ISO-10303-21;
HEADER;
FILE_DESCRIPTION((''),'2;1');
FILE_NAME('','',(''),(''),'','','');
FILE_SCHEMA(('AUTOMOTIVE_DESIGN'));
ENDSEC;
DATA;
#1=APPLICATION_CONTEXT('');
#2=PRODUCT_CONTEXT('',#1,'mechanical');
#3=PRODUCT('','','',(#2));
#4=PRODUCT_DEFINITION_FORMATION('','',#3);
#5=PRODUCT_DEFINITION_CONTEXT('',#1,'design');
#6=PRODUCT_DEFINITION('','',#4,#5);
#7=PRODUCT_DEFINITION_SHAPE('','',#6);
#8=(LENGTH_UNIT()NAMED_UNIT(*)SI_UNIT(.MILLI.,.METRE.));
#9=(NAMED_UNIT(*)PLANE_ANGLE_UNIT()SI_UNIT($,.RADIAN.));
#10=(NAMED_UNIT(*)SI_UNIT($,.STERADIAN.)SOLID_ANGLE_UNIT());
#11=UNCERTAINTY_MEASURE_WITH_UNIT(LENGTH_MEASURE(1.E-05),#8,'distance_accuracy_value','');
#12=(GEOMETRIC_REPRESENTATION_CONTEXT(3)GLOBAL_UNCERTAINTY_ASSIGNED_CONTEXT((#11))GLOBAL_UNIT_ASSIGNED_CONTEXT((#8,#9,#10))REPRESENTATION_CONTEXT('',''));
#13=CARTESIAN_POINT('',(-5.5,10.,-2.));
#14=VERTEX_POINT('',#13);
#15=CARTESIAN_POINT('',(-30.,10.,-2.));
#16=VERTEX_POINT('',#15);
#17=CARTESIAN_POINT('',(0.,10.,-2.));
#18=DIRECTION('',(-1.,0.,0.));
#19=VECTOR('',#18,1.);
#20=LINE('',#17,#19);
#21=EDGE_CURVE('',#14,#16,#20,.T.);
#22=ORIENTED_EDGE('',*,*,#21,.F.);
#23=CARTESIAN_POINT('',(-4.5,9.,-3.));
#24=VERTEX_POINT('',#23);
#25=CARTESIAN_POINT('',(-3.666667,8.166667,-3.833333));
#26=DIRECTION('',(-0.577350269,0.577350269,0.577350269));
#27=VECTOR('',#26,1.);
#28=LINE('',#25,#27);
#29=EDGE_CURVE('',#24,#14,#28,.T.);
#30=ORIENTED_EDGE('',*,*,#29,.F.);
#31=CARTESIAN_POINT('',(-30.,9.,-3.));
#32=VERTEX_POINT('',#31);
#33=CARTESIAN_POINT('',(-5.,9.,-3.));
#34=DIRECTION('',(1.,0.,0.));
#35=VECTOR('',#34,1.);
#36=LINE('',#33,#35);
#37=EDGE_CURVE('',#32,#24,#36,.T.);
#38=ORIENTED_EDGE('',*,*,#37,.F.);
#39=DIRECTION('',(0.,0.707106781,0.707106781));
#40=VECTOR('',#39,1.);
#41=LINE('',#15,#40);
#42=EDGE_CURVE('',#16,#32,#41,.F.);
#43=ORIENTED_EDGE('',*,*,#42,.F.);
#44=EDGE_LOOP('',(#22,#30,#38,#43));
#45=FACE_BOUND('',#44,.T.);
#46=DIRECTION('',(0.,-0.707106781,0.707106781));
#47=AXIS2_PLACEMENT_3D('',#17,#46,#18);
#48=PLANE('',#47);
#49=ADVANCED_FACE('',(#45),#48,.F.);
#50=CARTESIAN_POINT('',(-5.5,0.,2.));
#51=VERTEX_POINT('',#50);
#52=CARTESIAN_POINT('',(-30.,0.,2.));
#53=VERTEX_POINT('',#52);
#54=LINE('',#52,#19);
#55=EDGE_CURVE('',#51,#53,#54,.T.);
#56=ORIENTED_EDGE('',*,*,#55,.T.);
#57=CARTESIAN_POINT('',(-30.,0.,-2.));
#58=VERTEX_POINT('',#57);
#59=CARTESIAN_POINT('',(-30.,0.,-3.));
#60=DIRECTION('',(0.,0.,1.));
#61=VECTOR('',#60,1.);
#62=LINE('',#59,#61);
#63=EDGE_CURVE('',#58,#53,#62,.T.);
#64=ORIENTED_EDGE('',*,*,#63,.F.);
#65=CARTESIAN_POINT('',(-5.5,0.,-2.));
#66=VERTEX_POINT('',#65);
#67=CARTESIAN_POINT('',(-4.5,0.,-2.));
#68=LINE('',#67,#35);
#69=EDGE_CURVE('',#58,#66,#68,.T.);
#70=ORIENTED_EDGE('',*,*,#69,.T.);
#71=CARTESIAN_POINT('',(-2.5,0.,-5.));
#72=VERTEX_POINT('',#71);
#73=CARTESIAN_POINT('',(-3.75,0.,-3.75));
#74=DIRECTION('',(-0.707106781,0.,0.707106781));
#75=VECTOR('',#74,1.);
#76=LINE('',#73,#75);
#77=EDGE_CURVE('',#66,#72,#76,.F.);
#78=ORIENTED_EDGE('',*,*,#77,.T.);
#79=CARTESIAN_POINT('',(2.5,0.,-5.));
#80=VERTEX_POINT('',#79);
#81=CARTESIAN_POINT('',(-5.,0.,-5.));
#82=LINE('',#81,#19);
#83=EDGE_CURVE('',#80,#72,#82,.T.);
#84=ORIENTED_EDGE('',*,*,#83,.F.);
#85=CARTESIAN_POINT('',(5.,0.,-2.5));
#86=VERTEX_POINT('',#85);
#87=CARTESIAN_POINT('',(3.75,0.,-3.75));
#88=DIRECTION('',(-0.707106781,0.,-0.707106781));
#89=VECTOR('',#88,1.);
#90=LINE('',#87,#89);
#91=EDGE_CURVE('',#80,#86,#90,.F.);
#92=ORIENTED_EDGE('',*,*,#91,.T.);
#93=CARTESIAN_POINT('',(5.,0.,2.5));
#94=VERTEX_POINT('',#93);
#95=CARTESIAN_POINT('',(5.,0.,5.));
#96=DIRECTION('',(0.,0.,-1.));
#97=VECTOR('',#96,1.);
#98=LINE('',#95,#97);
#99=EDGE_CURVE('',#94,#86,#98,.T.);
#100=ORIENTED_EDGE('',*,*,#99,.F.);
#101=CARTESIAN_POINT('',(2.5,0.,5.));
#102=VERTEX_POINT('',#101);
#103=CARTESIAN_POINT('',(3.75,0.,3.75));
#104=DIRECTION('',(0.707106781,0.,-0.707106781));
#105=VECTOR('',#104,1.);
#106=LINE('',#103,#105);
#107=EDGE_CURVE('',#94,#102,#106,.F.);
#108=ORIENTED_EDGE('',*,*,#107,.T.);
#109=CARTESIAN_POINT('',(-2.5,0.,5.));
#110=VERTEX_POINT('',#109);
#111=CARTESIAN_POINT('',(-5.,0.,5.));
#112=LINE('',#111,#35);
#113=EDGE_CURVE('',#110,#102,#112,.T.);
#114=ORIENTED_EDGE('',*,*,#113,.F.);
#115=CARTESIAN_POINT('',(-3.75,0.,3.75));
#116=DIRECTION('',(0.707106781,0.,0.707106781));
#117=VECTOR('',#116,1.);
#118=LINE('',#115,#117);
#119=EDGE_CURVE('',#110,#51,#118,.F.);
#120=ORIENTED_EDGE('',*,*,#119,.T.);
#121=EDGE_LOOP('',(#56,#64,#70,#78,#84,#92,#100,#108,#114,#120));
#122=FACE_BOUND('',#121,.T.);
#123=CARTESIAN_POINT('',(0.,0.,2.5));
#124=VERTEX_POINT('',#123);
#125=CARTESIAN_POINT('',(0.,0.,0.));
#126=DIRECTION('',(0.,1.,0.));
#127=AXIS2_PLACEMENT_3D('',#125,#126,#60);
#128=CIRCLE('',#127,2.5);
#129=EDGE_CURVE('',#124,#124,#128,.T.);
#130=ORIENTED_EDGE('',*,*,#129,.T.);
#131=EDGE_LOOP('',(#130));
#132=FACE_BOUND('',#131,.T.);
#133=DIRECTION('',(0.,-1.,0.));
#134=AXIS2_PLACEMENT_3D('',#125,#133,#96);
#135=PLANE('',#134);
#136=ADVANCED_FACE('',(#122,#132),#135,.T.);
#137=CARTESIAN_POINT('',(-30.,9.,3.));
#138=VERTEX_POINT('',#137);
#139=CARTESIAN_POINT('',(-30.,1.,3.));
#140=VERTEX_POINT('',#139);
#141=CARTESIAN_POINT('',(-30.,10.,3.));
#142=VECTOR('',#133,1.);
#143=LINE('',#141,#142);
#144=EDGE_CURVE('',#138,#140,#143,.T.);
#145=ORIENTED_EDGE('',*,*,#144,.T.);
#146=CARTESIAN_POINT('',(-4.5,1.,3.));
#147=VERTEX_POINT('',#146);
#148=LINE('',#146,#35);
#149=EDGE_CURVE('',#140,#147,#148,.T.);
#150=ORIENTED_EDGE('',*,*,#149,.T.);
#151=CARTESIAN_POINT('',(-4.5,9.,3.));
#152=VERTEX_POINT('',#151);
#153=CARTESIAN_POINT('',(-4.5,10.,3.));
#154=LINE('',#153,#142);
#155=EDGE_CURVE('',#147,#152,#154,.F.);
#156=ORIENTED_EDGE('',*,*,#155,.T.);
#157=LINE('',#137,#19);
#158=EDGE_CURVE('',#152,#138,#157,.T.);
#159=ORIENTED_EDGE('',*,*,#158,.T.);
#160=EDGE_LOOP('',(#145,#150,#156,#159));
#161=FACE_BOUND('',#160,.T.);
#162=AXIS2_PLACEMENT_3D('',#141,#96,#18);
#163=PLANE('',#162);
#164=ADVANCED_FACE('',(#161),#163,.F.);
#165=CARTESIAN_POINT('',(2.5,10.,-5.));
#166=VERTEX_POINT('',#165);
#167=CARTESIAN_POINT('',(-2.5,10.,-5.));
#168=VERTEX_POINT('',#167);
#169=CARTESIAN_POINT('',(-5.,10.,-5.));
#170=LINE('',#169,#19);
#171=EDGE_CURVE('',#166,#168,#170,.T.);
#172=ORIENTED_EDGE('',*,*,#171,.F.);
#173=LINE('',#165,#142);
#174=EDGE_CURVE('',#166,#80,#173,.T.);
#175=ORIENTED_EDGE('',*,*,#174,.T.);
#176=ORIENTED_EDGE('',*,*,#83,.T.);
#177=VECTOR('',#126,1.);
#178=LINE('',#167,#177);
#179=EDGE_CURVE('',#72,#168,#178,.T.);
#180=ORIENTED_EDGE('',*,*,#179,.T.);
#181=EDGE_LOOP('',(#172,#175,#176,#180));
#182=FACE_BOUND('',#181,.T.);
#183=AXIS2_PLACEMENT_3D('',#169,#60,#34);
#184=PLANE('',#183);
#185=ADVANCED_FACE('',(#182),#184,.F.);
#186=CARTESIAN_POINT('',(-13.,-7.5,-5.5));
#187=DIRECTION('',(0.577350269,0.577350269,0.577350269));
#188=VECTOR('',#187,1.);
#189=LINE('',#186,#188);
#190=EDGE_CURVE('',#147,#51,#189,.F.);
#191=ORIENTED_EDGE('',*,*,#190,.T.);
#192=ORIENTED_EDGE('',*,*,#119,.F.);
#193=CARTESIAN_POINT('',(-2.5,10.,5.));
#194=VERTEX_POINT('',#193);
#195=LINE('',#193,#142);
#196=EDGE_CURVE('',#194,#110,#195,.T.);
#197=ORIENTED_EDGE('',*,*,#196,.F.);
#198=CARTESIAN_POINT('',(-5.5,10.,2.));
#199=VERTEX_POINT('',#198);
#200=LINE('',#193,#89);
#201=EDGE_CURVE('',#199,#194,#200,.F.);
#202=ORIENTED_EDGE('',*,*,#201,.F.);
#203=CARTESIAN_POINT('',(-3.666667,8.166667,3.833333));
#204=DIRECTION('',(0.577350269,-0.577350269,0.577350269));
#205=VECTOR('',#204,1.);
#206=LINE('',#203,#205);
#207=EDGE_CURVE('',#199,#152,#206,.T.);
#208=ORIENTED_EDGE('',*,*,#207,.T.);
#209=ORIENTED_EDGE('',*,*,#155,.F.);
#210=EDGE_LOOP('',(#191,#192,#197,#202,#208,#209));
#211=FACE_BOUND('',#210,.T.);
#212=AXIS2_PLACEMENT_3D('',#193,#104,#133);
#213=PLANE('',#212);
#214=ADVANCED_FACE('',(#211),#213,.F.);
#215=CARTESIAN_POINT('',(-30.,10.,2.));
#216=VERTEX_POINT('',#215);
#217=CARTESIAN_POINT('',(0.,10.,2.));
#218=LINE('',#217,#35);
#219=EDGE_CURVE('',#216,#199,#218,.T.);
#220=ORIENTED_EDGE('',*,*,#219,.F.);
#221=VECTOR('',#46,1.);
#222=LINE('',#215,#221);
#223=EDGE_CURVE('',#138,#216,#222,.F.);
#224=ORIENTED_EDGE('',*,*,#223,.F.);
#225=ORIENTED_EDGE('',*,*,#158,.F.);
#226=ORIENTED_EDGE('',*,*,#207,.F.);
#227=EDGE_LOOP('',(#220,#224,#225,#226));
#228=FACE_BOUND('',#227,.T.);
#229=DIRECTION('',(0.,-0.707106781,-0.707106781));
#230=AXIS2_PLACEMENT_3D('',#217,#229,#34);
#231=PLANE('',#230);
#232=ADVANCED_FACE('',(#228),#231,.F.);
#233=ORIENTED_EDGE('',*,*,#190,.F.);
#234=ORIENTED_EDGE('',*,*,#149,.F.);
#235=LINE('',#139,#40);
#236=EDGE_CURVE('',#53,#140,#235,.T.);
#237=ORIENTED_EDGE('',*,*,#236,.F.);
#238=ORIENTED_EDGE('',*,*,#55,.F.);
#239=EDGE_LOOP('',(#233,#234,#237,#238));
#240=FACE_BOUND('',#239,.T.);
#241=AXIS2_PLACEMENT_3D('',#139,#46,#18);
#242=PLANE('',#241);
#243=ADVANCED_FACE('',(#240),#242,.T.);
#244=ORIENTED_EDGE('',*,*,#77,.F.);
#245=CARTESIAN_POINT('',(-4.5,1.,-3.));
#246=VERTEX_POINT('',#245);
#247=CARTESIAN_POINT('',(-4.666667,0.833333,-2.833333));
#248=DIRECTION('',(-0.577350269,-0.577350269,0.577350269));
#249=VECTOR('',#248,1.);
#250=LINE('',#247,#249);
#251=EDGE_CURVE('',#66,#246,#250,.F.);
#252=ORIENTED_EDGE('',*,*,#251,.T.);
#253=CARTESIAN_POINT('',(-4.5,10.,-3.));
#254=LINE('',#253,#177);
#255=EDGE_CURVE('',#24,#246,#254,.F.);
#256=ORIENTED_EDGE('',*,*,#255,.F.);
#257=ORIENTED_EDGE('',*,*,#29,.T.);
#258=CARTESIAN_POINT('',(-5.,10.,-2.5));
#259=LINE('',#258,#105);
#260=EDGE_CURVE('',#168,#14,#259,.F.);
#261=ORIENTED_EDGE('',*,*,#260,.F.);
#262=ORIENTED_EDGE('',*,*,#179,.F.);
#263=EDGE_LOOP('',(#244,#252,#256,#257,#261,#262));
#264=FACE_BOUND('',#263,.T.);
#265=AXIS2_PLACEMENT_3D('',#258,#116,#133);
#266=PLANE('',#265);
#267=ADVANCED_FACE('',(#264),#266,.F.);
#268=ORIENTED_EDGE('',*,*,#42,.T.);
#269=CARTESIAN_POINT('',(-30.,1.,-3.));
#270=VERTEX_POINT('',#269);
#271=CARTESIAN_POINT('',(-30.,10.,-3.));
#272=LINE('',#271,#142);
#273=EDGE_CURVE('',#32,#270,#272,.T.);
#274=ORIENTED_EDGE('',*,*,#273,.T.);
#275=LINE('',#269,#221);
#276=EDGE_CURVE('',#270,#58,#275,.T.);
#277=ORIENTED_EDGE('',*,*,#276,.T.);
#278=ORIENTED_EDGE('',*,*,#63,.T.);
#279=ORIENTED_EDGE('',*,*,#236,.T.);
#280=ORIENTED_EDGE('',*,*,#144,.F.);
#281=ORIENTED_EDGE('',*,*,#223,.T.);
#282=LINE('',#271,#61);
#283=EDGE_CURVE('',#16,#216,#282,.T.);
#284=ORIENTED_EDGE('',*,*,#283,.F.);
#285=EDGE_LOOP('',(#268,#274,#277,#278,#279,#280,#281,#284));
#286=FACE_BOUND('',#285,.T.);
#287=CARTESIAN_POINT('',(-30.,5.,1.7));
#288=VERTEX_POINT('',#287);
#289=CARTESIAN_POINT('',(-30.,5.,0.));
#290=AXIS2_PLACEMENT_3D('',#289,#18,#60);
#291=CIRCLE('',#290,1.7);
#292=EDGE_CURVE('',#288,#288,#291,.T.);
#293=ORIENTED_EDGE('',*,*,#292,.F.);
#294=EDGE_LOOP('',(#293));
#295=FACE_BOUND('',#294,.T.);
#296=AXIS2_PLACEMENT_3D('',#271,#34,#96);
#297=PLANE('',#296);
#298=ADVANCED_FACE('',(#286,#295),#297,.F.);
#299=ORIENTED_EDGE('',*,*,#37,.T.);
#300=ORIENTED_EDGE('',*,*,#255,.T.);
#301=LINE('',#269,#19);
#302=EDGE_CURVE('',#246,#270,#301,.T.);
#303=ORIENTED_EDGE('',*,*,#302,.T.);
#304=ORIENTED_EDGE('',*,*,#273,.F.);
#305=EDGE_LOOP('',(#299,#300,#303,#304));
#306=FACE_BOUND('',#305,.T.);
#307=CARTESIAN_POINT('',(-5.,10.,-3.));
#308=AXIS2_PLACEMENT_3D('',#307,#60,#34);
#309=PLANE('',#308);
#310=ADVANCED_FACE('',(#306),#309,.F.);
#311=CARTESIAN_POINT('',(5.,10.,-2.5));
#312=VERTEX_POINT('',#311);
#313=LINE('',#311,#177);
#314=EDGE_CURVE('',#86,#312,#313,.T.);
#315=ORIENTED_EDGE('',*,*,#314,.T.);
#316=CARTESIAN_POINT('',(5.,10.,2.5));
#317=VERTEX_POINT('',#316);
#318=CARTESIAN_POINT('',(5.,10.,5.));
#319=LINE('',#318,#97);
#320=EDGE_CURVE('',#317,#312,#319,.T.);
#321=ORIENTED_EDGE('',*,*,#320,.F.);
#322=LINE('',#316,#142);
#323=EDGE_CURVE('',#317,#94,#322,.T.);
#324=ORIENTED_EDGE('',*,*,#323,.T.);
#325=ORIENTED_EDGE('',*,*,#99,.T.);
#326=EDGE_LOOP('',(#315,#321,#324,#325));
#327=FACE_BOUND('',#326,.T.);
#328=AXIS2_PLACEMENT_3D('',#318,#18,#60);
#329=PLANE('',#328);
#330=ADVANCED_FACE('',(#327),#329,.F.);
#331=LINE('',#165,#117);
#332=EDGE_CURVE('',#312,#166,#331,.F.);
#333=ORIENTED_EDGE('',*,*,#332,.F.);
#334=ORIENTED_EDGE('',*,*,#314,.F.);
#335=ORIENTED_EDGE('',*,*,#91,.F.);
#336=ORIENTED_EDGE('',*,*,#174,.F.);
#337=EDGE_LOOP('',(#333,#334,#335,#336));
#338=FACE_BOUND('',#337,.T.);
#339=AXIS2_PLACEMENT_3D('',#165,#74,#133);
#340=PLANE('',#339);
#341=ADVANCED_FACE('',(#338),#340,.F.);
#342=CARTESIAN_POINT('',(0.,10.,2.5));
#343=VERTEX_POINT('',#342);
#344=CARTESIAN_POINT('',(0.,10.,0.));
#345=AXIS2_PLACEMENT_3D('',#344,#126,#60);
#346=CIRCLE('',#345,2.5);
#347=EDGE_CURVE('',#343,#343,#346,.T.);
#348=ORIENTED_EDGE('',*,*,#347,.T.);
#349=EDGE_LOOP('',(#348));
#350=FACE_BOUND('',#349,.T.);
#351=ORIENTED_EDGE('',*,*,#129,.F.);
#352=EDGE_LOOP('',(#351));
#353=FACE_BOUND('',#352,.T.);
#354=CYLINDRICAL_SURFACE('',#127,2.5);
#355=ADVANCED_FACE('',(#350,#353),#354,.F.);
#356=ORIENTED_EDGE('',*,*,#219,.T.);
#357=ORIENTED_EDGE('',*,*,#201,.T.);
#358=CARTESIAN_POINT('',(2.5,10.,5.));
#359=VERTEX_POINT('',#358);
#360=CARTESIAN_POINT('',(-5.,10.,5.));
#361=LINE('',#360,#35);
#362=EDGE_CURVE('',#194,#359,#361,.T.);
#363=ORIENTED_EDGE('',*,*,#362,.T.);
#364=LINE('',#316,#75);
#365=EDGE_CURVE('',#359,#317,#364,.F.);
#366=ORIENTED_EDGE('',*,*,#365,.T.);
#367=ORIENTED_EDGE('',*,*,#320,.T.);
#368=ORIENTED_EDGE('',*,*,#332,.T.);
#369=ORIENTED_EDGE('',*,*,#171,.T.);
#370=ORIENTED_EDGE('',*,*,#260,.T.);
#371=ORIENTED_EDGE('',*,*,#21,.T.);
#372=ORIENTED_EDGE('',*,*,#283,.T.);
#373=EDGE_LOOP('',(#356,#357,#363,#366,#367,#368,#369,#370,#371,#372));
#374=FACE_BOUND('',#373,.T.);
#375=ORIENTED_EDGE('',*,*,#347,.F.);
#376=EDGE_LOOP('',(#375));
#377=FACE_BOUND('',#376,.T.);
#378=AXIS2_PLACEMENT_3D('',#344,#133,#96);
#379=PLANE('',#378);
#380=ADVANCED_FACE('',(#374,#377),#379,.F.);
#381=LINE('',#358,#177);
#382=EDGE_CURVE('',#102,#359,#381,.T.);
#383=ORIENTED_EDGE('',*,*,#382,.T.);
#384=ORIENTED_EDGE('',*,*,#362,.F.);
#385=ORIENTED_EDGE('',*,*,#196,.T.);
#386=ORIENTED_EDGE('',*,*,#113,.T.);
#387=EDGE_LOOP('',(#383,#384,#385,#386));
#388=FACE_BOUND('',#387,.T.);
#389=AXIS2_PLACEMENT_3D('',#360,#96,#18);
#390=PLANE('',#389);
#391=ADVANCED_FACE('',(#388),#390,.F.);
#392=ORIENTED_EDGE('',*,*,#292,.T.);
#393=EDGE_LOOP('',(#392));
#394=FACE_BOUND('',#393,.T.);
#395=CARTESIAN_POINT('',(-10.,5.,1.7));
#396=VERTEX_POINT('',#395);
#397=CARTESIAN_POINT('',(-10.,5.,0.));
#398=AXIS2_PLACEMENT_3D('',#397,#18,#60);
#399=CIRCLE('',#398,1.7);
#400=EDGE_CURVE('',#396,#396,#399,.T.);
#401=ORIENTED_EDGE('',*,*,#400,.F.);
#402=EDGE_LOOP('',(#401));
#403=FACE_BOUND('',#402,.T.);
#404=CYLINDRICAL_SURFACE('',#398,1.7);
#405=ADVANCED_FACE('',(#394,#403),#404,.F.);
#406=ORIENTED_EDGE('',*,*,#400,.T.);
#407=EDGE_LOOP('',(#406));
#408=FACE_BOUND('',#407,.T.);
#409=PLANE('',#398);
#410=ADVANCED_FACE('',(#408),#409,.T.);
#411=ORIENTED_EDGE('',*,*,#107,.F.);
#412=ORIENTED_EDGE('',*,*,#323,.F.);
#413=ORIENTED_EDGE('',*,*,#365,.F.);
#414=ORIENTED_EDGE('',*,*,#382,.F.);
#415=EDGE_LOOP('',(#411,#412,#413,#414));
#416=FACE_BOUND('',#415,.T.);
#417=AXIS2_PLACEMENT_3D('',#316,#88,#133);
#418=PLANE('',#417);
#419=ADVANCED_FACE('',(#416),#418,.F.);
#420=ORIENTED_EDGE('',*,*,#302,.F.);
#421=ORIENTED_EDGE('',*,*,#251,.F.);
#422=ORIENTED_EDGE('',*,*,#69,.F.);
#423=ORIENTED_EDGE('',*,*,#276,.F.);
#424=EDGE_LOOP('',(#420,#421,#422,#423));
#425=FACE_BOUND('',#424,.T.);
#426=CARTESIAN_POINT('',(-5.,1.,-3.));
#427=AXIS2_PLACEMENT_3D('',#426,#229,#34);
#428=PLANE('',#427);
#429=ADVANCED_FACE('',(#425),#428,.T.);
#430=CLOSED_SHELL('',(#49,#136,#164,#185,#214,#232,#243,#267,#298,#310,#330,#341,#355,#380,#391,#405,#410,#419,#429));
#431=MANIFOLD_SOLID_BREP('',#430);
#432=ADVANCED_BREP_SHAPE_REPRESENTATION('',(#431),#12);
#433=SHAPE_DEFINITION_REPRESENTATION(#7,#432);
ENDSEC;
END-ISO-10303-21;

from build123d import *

# Parameters (mm, degrees)
BOSS_EXTRUDE1_DEPTH = 10
SKETCH2_R           = 2.5
CUT_EXTRUDE1_DEPTH  = 10
SKETCH4_R           = 1.7
CUT_EXTRUDE4_DEPTH  = 20
CHAMFER1_SIZE       = 2.5
CHAMFER2_SIZE       = 1


with BuildPart() as part:
    # Sketch1 → Boss-Extrude1 (new body)
    with BuildSketch(Plane(origin=(0, 0, 0), x_dir=(1, 0, 0), z_dir=(0, 1, 0))):
        Polygon((-5, 5), (-5, 3), (-30, 3), (-30, -3), (-5, -3), (-5, -5), (5, -5), (5, 5), align=None)
    extrude(amount=BOSS_EXTRUDE1_DEPTH)

    # Sketch2 → Cut-Extrude1 (cut)
    with BuildSketch(Plane(origin=(0, 10, 0), x_dir=(1, 0, 0), z_dir=(0, 1, 0))):
        with Locations(Location((0, 0, 0), (0, 0, 270))):
            Circle(SKETCH2_R)
    extrude(amount=-CUT_EXTRUDE1_DEPTH, mode=Mode.SUBTRACT)

    # Sketch4 → Cut-Extrude4 (cut)
    with BuildSketch(Plane.ZY.offset(30)):
        with Locations((0, 5)):
            Circle(SKETCH4_R)
    extrude(amount=-CUT_EXTRUDE4_DEPTH, mode=Mode.SUBTRACT)

    # Chamfer1
    # the kernel refuses this chamfer: 2.5 mm, written as the material it takes off along each edge
    with BuildSketch(Plane(origin=(5, -6.42920747, -5), x_dir=(-0.9996219169112968, 0, -0.027495876610586317), z_dir=(0, 1, 0)), Plane(origin=(5, -6.42920747, 5), x_dir=(0.027495876610586317, 0, -0.9996219169112968), z_dir=(0, 1, 0))) as chamfer1_piece_1:
        Polygon((CHAMFER1_SIZE * 0.999621916911, CHAMFER1_SIZE * 0.0274958766106), (-CHAMFER1_SIZE * 0.0274958766106, CHAMFER1_SIZE * 0.999621916911), (0, 0), align=None)
    extrude(amount=22.85841494, mode=Mode.SUBTRACT)
    with BuildSketch(Plane(origin=(-5, -6.42920747, 5), x_dir=(0.9996219169112968, 0, 0.027495876610586317), z_dir=(0, 1, 0))) as chamfer1_piece_2_section:
        Polygon((CHAMFER1_SIZE * 0.999621916911, CHAMFER1_SIZE * 0.0274958766106), (-CHAMFER1_SIZE * 0.0274958766106, CHAMFER1_SIZE * 0.999621916911), (0, 0), align=None)
    chamfer1_piece_2 = extrude(amount=22.85841494, mode=Mode.PRIVATE)
    chamfer1_piece_2 = split(chamfer1_piece_2, bisect_by=Plane(origin=(-4.135703969, 5, 3), z_dir=(0, 0, 1)), keep=Keep.TOP, mode=Mode.PRIVATE)
    add(chamfer1_piece_2, mode=Mode.SUBTRACT)
    with BuildSketch(Plane(origin=(-5, -6.42920747, -5), x_dir=(-0.027495876610588735, 0, 0.9996219169112968), z_dir=(0, 1, 0))) as chamfer1_piece_3_section:
        Polygon((CHAMFER1_SIZE * 0.999621916911, CHAMFER1_SIZE * 0.0274958766106), (-CHAMFER1_SIZE * 0.0274958766106, CHAMFER1_SIZE * 0.999621916911), (0, 0), align=None)
    chamfer1_piece_3 = extrude(amount=22.85841494, mode=Mode.PRIVATE)
    chamfer1_piece_3 = split(chamfer1_piece_3, bisect_by=Plane(origin=(-4.135703969, 5, -3), z_dir=(0, 0, -1)), keep=Keep.TOP, mode=Mode.PRIVATE)
    add(chamfer1_piece_3, mode=Mode.SUBTRACT)

    # Chamfer2
    chamfer2_edges = [part.edges().sort_by_distance(p)[0] for p in [
        (-17.25, 10, -3),
        (-17.25, 10, 3),
        (-17.25, 0, 3),
        (-17.25, 0, -3),
    ]]
    chamfer(chamfer2_edges, length=CHAMFER2_SIZE)


solid = part.part
